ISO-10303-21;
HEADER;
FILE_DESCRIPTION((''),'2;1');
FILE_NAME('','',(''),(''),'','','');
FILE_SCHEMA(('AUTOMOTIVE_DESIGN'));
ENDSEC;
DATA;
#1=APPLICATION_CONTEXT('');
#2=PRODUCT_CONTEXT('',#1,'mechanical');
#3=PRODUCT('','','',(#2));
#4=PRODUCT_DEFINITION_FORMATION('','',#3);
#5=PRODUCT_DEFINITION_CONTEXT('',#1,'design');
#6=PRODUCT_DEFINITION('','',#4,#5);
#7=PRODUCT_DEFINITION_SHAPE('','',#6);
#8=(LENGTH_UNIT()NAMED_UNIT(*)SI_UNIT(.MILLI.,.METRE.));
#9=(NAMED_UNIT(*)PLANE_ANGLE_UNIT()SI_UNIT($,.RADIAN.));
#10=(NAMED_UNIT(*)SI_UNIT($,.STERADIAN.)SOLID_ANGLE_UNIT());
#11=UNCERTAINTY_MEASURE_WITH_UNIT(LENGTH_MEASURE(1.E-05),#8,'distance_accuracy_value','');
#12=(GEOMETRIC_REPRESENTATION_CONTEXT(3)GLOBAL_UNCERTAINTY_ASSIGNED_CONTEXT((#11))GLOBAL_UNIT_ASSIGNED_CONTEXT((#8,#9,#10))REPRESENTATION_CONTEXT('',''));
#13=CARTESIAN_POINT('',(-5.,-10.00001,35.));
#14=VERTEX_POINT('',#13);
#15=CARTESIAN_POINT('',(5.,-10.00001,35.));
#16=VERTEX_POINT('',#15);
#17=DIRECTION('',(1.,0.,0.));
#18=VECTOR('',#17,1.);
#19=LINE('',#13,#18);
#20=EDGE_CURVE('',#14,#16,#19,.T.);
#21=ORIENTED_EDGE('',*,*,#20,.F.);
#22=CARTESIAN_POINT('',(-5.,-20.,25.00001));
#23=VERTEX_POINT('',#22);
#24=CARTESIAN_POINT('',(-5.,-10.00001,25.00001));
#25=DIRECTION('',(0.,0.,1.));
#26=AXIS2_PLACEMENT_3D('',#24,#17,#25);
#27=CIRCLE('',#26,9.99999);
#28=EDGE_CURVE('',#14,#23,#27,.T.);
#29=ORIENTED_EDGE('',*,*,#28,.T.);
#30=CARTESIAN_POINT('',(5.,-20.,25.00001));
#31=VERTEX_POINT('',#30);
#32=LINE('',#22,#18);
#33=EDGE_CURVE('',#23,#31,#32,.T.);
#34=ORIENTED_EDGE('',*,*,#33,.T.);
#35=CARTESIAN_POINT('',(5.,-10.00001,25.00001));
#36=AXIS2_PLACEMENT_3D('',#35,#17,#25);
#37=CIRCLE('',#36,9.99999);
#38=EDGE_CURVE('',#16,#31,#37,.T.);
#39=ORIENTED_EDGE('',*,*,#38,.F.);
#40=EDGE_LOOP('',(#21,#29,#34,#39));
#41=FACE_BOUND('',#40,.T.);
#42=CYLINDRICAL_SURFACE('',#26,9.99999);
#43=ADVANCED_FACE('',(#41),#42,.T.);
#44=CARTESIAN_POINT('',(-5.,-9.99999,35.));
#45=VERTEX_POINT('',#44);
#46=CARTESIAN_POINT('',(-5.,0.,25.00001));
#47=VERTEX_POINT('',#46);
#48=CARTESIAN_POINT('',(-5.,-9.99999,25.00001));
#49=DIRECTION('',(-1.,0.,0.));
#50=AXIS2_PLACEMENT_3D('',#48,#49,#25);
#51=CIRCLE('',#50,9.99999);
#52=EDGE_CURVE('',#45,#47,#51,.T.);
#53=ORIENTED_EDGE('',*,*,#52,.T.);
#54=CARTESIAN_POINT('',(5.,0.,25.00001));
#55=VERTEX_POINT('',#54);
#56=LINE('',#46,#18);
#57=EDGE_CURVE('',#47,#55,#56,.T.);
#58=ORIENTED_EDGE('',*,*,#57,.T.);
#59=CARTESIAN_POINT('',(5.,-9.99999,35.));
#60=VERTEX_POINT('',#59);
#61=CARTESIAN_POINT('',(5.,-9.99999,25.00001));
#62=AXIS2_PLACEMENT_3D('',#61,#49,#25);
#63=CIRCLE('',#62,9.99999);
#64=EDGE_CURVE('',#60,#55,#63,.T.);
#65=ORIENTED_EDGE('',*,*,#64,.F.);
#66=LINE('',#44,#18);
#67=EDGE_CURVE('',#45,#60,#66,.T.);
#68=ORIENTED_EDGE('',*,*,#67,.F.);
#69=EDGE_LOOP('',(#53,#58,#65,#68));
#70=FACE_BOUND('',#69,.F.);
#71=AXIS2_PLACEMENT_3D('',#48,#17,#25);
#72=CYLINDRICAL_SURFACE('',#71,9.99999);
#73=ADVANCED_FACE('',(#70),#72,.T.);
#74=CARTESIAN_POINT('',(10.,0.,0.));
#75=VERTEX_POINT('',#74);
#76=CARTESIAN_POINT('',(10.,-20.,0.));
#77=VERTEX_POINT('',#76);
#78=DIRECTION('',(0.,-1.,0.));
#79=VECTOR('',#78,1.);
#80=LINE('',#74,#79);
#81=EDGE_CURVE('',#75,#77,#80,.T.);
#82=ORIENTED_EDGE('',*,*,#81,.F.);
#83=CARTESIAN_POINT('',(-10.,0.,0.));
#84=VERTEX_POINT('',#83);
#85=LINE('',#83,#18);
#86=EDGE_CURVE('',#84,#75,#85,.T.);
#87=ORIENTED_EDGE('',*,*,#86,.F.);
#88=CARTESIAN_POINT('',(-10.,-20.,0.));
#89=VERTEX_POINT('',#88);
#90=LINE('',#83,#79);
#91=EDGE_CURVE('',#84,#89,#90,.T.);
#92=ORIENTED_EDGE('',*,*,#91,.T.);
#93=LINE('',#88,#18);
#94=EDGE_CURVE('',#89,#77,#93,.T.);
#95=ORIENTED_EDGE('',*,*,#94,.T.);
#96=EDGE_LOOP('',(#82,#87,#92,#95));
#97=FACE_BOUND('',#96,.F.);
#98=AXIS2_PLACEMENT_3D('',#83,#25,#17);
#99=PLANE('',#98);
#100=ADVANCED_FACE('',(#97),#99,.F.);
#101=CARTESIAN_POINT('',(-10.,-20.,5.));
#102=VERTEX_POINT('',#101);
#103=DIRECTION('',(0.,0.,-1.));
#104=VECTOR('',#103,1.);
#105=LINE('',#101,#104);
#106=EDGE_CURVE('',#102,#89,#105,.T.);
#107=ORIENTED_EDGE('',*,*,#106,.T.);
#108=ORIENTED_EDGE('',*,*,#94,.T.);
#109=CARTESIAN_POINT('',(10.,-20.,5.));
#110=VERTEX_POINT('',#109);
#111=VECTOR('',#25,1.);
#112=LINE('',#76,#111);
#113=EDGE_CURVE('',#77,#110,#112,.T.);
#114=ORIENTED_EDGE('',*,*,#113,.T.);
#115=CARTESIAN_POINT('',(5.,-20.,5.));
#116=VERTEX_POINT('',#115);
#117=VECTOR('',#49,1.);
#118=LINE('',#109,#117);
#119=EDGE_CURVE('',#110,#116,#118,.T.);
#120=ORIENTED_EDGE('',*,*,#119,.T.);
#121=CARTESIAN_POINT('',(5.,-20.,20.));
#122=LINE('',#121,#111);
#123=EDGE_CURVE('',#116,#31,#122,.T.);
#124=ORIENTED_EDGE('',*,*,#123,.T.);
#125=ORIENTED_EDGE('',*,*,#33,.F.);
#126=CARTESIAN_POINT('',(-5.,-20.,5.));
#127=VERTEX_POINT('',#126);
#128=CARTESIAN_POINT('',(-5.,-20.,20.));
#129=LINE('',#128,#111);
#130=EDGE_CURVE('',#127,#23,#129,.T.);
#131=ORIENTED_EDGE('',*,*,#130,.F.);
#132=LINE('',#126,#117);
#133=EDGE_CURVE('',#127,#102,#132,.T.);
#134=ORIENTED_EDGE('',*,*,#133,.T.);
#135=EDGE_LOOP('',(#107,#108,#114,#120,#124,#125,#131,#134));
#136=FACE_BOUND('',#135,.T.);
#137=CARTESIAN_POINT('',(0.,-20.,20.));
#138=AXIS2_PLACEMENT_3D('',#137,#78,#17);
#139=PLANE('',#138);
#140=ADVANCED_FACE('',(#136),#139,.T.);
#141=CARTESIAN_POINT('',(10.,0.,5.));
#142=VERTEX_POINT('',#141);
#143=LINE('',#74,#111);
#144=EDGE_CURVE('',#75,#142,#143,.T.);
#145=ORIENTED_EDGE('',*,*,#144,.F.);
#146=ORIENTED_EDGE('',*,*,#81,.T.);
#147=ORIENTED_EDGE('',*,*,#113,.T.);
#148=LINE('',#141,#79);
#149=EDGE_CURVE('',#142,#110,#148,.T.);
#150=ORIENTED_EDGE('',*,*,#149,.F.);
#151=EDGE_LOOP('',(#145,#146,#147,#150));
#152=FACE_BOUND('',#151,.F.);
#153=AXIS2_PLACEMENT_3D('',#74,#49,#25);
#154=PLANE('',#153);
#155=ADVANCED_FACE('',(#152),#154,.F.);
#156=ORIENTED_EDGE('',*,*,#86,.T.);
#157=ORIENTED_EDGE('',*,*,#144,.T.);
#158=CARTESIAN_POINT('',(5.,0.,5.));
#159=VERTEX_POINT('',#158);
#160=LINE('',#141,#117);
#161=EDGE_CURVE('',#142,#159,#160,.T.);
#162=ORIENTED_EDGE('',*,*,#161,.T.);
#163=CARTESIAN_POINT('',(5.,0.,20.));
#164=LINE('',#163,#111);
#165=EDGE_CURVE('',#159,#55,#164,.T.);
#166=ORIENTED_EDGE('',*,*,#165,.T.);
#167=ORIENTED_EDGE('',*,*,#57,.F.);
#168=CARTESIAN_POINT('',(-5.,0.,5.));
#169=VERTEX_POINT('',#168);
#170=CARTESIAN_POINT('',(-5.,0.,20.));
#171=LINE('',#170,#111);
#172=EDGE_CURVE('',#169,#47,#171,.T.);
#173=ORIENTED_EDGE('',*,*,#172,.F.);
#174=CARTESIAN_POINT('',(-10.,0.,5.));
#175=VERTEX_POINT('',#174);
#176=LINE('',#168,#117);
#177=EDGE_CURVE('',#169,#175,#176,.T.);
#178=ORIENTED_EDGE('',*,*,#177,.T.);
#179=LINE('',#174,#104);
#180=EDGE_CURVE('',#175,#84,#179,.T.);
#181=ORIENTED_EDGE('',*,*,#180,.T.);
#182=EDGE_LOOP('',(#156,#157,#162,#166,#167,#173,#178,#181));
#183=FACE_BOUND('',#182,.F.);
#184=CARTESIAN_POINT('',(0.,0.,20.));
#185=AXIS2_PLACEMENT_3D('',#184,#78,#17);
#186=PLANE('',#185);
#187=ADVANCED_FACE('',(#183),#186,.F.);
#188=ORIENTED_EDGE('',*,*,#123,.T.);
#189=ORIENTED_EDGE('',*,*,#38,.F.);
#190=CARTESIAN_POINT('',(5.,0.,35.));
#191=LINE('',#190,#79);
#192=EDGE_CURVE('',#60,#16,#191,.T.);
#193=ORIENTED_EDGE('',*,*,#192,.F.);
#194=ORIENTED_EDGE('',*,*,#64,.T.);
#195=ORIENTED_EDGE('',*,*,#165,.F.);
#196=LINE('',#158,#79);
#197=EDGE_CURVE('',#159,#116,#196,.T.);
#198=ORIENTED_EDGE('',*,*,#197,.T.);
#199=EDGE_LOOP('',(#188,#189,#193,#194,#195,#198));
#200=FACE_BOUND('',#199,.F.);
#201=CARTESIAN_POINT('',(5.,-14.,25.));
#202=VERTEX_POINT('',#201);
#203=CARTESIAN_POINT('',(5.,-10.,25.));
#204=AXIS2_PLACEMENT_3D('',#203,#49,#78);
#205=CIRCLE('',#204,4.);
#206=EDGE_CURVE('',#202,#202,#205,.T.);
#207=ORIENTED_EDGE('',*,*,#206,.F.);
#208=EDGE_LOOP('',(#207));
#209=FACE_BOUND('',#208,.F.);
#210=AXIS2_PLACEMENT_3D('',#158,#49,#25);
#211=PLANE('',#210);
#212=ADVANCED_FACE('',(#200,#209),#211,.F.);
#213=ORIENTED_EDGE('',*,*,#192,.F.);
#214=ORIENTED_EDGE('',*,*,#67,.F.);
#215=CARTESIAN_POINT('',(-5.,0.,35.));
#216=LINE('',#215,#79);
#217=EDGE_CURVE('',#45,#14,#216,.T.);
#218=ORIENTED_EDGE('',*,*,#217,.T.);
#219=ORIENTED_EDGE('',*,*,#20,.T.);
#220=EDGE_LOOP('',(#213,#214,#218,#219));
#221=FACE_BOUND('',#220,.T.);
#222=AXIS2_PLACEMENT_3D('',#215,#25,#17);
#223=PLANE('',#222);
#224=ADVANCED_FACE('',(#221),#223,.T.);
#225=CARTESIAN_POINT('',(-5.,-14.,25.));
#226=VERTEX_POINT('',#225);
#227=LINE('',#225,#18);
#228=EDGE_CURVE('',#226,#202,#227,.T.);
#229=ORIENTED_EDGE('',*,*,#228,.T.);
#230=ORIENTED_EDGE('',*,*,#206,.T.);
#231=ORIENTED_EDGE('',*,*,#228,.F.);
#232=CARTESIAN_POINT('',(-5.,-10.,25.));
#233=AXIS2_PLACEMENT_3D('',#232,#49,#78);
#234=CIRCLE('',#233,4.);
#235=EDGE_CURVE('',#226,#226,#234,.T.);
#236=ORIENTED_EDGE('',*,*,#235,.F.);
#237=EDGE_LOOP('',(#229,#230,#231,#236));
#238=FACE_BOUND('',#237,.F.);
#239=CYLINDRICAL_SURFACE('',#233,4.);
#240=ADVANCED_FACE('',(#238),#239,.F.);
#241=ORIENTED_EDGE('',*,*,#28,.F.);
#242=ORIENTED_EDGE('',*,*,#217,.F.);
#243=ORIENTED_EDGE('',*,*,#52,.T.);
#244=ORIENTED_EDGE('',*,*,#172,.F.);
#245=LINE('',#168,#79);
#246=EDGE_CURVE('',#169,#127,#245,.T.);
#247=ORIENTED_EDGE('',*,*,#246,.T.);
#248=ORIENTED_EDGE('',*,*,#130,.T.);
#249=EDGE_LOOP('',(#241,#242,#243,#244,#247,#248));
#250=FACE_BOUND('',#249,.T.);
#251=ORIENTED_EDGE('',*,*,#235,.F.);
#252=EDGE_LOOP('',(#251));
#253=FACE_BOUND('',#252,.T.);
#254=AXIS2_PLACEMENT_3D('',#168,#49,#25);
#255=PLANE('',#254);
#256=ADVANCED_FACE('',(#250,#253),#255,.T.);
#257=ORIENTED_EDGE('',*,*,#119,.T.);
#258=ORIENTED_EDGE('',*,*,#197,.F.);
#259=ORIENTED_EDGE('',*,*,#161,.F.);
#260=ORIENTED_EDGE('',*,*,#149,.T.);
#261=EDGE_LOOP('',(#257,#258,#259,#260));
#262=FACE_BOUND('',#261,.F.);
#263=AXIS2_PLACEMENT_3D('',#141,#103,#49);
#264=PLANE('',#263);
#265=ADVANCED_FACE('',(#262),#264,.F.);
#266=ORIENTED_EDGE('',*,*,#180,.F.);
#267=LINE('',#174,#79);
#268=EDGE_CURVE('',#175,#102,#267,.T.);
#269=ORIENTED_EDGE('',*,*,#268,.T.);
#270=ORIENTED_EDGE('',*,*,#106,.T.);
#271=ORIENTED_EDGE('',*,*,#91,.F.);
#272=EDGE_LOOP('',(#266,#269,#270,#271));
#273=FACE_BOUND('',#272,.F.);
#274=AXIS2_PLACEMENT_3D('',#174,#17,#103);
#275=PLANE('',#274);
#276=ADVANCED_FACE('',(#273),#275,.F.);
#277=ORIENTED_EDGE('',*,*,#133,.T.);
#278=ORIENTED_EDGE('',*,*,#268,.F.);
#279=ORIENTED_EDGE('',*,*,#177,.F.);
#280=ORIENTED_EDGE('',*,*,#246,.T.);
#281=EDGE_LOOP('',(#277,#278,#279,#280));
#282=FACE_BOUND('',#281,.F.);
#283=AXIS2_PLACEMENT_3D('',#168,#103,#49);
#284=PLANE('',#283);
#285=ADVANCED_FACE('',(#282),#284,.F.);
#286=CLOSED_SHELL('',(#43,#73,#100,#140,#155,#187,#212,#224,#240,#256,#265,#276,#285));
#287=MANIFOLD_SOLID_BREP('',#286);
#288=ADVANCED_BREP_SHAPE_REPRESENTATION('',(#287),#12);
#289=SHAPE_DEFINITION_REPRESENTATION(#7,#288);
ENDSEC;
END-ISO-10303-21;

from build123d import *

# Parameters (mm, degrees)
F0_W     = 10
F0_H     = 30
F1_DEPTH = 20
F2_R     = 9.99999
F3_R     = 4
F4_DEPTH = 15.001


# Not quite as in the source:
# - a fillet or chamfer is up to 0.001 mm smaller than in the source, because OpenCascade refuses the exact size


with BuildPart() as f1:
    # F0 (on Front) → F1 (new body)
    with BuildSketch(Plane.XZ):
        with Locations((0, 20)):
            Rectangle(F0_W, F0_H)
        Polygon((-5, 5), (-10, 5), (-10, 0), (10, 0), (10, 5), (5, 5), align=None)
    extrude(amount=F1_DEPTH)

    # F2 (radius 10 in the source; OpenCascade refuses exactly that, so slightly less here)
    f2_edges = [f1.edges().sort_by_distance(p)[0] for p in [
        (0, 0, 35),
        (0, -20, 35),
    ]]
    fillet(f2_edges, radius=F2_R)

    # F3 (on face) → F4 (cut, through all)
    with BuildSketch(Plane(origin=(-5, 0, 0), x_dir=(0, -1, 0), z_dir=(-1, 0, 0))):
        with Locations((10, 25)):
            Circle(F3_R)
    extrude(amount=-F4_DEPTH, mode=Mode.SUBTRACT)


solid = f1.part
